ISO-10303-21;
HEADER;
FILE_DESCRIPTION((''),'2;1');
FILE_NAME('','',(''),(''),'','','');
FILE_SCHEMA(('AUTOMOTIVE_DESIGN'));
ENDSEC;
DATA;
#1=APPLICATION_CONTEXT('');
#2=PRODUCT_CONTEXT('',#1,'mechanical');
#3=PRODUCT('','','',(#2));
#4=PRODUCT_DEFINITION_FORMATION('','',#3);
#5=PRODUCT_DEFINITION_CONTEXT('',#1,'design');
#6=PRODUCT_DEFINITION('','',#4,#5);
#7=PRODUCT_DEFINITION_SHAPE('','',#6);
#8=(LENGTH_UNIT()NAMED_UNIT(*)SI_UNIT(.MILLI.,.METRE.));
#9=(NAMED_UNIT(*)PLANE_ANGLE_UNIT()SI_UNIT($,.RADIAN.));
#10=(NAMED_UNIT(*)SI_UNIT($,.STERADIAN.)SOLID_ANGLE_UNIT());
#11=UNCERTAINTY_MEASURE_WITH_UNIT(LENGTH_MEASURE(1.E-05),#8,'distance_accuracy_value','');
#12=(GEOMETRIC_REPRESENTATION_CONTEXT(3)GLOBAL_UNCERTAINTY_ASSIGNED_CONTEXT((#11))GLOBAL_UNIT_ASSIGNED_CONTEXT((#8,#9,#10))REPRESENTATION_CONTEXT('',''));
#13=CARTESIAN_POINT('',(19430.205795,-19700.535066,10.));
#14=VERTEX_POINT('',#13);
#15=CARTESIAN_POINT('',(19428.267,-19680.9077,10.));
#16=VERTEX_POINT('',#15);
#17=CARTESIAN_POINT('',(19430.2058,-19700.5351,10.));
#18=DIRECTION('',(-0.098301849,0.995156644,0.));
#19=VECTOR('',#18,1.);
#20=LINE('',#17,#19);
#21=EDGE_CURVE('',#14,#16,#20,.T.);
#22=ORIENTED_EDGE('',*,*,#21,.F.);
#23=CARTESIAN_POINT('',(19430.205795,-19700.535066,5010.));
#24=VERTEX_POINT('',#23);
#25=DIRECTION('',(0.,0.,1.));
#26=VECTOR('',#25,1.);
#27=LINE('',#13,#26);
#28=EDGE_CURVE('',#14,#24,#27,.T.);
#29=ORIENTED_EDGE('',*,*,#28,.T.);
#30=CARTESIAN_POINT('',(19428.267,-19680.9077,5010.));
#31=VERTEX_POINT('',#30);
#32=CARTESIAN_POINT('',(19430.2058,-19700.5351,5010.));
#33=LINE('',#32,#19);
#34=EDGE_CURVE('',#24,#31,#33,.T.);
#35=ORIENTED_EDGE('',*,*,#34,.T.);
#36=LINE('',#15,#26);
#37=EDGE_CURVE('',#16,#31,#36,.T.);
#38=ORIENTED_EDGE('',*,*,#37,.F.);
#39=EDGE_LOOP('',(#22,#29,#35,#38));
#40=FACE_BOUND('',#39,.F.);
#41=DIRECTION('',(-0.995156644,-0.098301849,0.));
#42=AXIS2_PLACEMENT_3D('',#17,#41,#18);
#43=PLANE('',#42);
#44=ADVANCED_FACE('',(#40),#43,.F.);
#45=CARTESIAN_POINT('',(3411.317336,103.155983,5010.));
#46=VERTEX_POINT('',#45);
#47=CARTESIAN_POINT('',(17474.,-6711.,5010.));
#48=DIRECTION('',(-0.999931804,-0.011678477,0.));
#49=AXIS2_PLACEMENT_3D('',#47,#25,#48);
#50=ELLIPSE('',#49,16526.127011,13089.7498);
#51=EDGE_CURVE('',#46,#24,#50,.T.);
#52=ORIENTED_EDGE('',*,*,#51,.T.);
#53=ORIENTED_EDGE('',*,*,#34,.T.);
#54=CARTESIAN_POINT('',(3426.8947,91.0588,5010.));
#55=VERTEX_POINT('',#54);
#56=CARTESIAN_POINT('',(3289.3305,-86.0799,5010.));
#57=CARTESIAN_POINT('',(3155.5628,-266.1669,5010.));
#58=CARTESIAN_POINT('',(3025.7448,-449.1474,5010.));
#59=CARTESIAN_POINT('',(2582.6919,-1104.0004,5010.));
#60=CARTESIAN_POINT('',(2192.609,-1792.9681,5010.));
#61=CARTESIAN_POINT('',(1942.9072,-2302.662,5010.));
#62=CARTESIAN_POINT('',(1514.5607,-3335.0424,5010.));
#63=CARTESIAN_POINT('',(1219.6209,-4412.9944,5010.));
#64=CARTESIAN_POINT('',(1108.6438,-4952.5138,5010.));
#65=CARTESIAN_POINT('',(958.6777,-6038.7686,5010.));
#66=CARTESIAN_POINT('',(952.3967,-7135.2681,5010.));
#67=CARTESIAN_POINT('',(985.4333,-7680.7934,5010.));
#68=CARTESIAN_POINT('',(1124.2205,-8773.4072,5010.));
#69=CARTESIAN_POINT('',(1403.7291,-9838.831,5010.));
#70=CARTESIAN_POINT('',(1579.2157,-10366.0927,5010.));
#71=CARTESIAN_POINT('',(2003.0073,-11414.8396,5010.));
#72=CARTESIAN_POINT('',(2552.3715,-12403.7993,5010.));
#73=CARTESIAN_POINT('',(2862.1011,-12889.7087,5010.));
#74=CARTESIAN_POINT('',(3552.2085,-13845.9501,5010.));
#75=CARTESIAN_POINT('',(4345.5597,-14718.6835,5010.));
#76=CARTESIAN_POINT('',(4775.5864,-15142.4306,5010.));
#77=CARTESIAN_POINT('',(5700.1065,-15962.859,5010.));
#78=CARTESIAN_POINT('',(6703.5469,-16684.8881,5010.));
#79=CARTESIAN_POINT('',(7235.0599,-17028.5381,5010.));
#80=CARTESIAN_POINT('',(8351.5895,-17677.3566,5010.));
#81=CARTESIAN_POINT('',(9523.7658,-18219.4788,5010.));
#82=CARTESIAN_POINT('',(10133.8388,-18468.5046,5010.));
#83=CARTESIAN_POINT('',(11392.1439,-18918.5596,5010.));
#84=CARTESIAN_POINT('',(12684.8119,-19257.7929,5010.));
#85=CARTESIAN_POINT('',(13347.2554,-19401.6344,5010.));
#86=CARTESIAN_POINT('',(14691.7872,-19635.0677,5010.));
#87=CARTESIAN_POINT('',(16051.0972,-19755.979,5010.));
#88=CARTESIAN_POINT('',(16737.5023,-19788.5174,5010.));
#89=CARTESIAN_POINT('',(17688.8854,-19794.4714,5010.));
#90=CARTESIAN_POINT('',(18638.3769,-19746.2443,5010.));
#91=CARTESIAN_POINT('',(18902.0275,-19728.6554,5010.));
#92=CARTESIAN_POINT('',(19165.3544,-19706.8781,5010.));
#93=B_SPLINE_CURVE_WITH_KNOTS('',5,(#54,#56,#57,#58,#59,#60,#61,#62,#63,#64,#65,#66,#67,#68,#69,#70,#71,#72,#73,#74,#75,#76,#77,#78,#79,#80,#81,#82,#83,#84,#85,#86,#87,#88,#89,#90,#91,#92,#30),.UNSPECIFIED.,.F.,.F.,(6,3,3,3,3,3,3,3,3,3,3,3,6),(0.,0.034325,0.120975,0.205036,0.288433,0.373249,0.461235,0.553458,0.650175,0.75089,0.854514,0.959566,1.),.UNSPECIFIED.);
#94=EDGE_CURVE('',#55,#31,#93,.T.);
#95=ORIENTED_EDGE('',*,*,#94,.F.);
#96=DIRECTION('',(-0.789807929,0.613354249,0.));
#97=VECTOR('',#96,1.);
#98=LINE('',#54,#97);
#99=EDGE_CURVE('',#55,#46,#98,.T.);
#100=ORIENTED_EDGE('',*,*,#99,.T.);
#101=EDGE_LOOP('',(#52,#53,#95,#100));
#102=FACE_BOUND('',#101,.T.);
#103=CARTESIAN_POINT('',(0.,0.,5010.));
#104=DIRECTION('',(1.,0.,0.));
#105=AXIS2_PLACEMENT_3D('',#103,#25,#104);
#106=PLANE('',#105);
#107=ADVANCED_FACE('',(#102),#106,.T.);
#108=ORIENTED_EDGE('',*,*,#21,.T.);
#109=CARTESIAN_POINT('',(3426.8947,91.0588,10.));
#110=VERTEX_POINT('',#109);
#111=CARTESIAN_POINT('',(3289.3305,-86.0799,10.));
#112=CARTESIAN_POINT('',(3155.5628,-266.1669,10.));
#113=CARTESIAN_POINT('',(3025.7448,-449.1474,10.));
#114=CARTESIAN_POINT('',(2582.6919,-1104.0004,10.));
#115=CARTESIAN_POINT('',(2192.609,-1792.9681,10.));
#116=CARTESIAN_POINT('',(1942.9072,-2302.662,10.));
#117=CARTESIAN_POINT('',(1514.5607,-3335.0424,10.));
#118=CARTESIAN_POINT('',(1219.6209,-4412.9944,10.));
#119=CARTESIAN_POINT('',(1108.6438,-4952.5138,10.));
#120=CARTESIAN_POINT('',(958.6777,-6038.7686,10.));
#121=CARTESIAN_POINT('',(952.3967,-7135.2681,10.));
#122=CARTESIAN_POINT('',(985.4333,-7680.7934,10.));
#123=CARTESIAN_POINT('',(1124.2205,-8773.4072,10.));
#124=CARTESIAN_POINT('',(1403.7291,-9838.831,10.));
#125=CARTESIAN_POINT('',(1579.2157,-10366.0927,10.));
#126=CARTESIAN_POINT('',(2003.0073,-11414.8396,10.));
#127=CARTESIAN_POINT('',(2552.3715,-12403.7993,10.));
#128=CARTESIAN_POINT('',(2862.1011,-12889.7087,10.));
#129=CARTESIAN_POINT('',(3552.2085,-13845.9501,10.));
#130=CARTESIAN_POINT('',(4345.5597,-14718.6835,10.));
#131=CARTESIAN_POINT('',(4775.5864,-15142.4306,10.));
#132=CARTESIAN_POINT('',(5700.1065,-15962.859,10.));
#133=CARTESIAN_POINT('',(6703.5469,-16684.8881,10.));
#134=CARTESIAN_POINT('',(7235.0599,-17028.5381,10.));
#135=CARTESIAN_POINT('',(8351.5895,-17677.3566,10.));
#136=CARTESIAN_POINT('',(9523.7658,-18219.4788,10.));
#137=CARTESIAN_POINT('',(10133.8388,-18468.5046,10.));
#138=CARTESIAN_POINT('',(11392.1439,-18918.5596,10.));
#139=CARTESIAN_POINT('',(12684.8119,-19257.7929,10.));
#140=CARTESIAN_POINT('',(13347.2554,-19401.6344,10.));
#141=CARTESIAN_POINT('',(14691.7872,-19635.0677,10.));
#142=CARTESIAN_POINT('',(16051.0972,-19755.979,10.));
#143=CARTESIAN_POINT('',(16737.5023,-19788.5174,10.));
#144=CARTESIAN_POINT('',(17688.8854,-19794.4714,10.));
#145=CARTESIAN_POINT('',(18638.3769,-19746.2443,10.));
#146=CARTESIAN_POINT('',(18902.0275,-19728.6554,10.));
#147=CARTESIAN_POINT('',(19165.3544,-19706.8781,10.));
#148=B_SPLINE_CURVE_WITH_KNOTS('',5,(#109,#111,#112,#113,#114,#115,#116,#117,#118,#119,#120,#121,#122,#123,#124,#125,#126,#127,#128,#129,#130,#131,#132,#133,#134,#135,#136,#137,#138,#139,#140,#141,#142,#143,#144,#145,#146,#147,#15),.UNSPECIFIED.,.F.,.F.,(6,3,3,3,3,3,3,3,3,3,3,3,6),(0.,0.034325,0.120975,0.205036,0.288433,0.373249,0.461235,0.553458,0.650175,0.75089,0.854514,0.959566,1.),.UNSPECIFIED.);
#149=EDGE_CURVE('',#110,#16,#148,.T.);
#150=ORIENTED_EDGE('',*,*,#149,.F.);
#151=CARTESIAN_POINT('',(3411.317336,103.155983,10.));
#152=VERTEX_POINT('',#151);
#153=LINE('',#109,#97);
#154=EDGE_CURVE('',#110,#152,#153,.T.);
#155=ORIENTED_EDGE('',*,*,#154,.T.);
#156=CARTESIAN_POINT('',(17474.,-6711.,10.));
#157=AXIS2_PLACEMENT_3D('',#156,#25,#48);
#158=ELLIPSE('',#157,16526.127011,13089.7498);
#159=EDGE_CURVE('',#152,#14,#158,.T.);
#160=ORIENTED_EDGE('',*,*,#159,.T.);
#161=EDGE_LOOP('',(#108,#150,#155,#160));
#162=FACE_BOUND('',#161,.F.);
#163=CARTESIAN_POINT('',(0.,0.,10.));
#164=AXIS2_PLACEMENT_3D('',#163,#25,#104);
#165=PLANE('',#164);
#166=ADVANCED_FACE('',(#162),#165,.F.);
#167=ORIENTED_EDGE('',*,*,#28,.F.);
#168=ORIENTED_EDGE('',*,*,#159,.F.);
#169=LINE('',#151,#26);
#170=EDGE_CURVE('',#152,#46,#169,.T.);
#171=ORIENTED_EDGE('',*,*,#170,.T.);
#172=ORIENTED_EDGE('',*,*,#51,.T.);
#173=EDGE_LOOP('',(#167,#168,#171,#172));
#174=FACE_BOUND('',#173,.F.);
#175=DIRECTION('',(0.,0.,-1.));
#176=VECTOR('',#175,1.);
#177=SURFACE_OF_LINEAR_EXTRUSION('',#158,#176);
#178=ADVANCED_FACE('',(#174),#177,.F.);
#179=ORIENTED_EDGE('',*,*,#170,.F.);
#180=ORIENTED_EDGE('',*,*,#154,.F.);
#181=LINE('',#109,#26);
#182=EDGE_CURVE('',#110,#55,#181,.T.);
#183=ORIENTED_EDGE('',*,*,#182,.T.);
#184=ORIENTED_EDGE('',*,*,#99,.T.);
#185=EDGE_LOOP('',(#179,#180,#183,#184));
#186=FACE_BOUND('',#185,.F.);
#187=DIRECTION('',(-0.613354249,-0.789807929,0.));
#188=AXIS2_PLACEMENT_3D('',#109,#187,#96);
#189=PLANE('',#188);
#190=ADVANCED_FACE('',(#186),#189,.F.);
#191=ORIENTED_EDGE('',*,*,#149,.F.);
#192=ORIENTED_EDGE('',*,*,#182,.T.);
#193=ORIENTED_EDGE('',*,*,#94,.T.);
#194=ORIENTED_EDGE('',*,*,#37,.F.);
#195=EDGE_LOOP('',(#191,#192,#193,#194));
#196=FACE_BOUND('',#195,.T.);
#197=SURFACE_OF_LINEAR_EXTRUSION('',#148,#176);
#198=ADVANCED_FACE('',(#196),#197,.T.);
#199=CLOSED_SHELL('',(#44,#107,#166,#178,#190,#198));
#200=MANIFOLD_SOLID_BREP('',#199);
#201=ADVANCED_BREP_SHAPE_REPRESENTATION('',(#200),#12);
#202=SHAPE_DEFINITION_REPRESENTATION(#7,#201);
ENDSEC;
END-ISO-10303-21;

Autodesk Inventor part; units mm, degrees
ref_plane "YZ Plane" through (0, 0, 0) normal (1, 0, 0) x (0, 1, 0)
ref_plane "XZ Plane" through (0, 0, 0) normal (0, 1, 0) x (-1, 0, 0)
ref_plane "Work Plane2" through (0, 0, 10) normal (0, 0, 1) x (1, 0, 0)
sketch "Sketch3" plane through (0, 0, 10) normal (0, 0, 1) x (1, 0, 0)
  ellipse E0 centre (17474, -6711) end of major axis (949, -6904) minor radius 13089.7498 (3411.3173, 103.156) -> (19430.2058, -19700.5351) ccw
  line L0 (19491, -21143) -> (18773, -4107) construction
  line L1 (18773, -4107) -> (949, 778) construction
  line L2 (19430.2058, -19700.5351) -> (19428.267, -19680.9077)
  line L3 (3426.8947, 91.0588) -> (3411.3173, 103.156)
  spline S0 degree 5 poles (3426.8946, 91.0588) (3289.3305, -86.0799) (3155.5628, -266.1669) (3025.7448, -449.1474) (2582.6919, -1104.0004) (2192.609, -1792.9681) (1942.9072, -2302.662) (1514.5607, -3335.0424) (1219.6209, -4412.9944) (1108.6438, -4952.5138) (958.6777, -6038.7686) (952.3967, -7135.2681) (985.4333, -7680.7934) (1124.2205, -8773.4072) (1403.7291, -9838.831) (1579.2157, -10366.0927) (2003.0073, -11414.8396) (2552.3715, -12403.7993) (2862.1011, -12889.7087) (3552.2085, -13845.9501) (4345.5597, -14718.6835) (4775.5864, -15142.4306) (5700.1065, -15962.859) (6703.5469, -16684.8881) (7235.0599, -17028.5381) (8351.5895, -17677.3566) (9523.7658, -18219.4788) (10133.8388, -18468.5046) (11392.1439, -18918.5596) (12684.8119, -19257.7929) (13347.2554, -19401.6344) (14691.7872, -19635.0677) (16051.0972, -19755.979) (16737.5023, -19788.5174) (17688.8854, -19794.4714) (18638.3769, -19746.2443) (18902.0275, -19728.6554) (19165.3544, -19706.8781) (19428.267, -19680.9077) knots 0 0 0 0 0 0 0.034325 0.034325 0.034325 0.120975 0.120975 0.120975 0.205036 0.205036 0.205036 0.288433 0.288433 0.288433 0.373249 0.373249 0.373249 0.461235 0.461235 0.461235 0.553458 0.553458 0.553458 0.650175 0.650175 0.650175 0.75089 0.75089 0.75089 0.854514 0.854514 0.854514 0.959566 0.959566 0.959566 1 1 1 1 1 1
  point P0 (0, 0)
  dimension "d6" = 19.7229
extrude "Extrusion3" add sketch "Sketch3" along normal blind 5000
ref_plane "Work Plane1" through (19428.267, -19680.9077, 5010) normal (0.7773315, 0.6290912, 0) x (0, 0, -1)
sketch "Sketch4" plane through (19428.267, -19680.9077, 5010) normal (0.7773315, 0.6290912, 0) x (0, 0, -1)
  line L0 (-4491.9999, 841.2222) -> (-4491.9999, 20653.222) construction
  line L1 (-4491.9999, 20653.222) -> (5414, 20653.222) construction
  line L2 (5414, 20653.222) -> (5414, 841.2222) construction
  line L3 (5414, 841.2222) -> (-4491.9999, 841.2222) construction
  point P0 (5010, 27520.7414)
properties part number "baraca"
